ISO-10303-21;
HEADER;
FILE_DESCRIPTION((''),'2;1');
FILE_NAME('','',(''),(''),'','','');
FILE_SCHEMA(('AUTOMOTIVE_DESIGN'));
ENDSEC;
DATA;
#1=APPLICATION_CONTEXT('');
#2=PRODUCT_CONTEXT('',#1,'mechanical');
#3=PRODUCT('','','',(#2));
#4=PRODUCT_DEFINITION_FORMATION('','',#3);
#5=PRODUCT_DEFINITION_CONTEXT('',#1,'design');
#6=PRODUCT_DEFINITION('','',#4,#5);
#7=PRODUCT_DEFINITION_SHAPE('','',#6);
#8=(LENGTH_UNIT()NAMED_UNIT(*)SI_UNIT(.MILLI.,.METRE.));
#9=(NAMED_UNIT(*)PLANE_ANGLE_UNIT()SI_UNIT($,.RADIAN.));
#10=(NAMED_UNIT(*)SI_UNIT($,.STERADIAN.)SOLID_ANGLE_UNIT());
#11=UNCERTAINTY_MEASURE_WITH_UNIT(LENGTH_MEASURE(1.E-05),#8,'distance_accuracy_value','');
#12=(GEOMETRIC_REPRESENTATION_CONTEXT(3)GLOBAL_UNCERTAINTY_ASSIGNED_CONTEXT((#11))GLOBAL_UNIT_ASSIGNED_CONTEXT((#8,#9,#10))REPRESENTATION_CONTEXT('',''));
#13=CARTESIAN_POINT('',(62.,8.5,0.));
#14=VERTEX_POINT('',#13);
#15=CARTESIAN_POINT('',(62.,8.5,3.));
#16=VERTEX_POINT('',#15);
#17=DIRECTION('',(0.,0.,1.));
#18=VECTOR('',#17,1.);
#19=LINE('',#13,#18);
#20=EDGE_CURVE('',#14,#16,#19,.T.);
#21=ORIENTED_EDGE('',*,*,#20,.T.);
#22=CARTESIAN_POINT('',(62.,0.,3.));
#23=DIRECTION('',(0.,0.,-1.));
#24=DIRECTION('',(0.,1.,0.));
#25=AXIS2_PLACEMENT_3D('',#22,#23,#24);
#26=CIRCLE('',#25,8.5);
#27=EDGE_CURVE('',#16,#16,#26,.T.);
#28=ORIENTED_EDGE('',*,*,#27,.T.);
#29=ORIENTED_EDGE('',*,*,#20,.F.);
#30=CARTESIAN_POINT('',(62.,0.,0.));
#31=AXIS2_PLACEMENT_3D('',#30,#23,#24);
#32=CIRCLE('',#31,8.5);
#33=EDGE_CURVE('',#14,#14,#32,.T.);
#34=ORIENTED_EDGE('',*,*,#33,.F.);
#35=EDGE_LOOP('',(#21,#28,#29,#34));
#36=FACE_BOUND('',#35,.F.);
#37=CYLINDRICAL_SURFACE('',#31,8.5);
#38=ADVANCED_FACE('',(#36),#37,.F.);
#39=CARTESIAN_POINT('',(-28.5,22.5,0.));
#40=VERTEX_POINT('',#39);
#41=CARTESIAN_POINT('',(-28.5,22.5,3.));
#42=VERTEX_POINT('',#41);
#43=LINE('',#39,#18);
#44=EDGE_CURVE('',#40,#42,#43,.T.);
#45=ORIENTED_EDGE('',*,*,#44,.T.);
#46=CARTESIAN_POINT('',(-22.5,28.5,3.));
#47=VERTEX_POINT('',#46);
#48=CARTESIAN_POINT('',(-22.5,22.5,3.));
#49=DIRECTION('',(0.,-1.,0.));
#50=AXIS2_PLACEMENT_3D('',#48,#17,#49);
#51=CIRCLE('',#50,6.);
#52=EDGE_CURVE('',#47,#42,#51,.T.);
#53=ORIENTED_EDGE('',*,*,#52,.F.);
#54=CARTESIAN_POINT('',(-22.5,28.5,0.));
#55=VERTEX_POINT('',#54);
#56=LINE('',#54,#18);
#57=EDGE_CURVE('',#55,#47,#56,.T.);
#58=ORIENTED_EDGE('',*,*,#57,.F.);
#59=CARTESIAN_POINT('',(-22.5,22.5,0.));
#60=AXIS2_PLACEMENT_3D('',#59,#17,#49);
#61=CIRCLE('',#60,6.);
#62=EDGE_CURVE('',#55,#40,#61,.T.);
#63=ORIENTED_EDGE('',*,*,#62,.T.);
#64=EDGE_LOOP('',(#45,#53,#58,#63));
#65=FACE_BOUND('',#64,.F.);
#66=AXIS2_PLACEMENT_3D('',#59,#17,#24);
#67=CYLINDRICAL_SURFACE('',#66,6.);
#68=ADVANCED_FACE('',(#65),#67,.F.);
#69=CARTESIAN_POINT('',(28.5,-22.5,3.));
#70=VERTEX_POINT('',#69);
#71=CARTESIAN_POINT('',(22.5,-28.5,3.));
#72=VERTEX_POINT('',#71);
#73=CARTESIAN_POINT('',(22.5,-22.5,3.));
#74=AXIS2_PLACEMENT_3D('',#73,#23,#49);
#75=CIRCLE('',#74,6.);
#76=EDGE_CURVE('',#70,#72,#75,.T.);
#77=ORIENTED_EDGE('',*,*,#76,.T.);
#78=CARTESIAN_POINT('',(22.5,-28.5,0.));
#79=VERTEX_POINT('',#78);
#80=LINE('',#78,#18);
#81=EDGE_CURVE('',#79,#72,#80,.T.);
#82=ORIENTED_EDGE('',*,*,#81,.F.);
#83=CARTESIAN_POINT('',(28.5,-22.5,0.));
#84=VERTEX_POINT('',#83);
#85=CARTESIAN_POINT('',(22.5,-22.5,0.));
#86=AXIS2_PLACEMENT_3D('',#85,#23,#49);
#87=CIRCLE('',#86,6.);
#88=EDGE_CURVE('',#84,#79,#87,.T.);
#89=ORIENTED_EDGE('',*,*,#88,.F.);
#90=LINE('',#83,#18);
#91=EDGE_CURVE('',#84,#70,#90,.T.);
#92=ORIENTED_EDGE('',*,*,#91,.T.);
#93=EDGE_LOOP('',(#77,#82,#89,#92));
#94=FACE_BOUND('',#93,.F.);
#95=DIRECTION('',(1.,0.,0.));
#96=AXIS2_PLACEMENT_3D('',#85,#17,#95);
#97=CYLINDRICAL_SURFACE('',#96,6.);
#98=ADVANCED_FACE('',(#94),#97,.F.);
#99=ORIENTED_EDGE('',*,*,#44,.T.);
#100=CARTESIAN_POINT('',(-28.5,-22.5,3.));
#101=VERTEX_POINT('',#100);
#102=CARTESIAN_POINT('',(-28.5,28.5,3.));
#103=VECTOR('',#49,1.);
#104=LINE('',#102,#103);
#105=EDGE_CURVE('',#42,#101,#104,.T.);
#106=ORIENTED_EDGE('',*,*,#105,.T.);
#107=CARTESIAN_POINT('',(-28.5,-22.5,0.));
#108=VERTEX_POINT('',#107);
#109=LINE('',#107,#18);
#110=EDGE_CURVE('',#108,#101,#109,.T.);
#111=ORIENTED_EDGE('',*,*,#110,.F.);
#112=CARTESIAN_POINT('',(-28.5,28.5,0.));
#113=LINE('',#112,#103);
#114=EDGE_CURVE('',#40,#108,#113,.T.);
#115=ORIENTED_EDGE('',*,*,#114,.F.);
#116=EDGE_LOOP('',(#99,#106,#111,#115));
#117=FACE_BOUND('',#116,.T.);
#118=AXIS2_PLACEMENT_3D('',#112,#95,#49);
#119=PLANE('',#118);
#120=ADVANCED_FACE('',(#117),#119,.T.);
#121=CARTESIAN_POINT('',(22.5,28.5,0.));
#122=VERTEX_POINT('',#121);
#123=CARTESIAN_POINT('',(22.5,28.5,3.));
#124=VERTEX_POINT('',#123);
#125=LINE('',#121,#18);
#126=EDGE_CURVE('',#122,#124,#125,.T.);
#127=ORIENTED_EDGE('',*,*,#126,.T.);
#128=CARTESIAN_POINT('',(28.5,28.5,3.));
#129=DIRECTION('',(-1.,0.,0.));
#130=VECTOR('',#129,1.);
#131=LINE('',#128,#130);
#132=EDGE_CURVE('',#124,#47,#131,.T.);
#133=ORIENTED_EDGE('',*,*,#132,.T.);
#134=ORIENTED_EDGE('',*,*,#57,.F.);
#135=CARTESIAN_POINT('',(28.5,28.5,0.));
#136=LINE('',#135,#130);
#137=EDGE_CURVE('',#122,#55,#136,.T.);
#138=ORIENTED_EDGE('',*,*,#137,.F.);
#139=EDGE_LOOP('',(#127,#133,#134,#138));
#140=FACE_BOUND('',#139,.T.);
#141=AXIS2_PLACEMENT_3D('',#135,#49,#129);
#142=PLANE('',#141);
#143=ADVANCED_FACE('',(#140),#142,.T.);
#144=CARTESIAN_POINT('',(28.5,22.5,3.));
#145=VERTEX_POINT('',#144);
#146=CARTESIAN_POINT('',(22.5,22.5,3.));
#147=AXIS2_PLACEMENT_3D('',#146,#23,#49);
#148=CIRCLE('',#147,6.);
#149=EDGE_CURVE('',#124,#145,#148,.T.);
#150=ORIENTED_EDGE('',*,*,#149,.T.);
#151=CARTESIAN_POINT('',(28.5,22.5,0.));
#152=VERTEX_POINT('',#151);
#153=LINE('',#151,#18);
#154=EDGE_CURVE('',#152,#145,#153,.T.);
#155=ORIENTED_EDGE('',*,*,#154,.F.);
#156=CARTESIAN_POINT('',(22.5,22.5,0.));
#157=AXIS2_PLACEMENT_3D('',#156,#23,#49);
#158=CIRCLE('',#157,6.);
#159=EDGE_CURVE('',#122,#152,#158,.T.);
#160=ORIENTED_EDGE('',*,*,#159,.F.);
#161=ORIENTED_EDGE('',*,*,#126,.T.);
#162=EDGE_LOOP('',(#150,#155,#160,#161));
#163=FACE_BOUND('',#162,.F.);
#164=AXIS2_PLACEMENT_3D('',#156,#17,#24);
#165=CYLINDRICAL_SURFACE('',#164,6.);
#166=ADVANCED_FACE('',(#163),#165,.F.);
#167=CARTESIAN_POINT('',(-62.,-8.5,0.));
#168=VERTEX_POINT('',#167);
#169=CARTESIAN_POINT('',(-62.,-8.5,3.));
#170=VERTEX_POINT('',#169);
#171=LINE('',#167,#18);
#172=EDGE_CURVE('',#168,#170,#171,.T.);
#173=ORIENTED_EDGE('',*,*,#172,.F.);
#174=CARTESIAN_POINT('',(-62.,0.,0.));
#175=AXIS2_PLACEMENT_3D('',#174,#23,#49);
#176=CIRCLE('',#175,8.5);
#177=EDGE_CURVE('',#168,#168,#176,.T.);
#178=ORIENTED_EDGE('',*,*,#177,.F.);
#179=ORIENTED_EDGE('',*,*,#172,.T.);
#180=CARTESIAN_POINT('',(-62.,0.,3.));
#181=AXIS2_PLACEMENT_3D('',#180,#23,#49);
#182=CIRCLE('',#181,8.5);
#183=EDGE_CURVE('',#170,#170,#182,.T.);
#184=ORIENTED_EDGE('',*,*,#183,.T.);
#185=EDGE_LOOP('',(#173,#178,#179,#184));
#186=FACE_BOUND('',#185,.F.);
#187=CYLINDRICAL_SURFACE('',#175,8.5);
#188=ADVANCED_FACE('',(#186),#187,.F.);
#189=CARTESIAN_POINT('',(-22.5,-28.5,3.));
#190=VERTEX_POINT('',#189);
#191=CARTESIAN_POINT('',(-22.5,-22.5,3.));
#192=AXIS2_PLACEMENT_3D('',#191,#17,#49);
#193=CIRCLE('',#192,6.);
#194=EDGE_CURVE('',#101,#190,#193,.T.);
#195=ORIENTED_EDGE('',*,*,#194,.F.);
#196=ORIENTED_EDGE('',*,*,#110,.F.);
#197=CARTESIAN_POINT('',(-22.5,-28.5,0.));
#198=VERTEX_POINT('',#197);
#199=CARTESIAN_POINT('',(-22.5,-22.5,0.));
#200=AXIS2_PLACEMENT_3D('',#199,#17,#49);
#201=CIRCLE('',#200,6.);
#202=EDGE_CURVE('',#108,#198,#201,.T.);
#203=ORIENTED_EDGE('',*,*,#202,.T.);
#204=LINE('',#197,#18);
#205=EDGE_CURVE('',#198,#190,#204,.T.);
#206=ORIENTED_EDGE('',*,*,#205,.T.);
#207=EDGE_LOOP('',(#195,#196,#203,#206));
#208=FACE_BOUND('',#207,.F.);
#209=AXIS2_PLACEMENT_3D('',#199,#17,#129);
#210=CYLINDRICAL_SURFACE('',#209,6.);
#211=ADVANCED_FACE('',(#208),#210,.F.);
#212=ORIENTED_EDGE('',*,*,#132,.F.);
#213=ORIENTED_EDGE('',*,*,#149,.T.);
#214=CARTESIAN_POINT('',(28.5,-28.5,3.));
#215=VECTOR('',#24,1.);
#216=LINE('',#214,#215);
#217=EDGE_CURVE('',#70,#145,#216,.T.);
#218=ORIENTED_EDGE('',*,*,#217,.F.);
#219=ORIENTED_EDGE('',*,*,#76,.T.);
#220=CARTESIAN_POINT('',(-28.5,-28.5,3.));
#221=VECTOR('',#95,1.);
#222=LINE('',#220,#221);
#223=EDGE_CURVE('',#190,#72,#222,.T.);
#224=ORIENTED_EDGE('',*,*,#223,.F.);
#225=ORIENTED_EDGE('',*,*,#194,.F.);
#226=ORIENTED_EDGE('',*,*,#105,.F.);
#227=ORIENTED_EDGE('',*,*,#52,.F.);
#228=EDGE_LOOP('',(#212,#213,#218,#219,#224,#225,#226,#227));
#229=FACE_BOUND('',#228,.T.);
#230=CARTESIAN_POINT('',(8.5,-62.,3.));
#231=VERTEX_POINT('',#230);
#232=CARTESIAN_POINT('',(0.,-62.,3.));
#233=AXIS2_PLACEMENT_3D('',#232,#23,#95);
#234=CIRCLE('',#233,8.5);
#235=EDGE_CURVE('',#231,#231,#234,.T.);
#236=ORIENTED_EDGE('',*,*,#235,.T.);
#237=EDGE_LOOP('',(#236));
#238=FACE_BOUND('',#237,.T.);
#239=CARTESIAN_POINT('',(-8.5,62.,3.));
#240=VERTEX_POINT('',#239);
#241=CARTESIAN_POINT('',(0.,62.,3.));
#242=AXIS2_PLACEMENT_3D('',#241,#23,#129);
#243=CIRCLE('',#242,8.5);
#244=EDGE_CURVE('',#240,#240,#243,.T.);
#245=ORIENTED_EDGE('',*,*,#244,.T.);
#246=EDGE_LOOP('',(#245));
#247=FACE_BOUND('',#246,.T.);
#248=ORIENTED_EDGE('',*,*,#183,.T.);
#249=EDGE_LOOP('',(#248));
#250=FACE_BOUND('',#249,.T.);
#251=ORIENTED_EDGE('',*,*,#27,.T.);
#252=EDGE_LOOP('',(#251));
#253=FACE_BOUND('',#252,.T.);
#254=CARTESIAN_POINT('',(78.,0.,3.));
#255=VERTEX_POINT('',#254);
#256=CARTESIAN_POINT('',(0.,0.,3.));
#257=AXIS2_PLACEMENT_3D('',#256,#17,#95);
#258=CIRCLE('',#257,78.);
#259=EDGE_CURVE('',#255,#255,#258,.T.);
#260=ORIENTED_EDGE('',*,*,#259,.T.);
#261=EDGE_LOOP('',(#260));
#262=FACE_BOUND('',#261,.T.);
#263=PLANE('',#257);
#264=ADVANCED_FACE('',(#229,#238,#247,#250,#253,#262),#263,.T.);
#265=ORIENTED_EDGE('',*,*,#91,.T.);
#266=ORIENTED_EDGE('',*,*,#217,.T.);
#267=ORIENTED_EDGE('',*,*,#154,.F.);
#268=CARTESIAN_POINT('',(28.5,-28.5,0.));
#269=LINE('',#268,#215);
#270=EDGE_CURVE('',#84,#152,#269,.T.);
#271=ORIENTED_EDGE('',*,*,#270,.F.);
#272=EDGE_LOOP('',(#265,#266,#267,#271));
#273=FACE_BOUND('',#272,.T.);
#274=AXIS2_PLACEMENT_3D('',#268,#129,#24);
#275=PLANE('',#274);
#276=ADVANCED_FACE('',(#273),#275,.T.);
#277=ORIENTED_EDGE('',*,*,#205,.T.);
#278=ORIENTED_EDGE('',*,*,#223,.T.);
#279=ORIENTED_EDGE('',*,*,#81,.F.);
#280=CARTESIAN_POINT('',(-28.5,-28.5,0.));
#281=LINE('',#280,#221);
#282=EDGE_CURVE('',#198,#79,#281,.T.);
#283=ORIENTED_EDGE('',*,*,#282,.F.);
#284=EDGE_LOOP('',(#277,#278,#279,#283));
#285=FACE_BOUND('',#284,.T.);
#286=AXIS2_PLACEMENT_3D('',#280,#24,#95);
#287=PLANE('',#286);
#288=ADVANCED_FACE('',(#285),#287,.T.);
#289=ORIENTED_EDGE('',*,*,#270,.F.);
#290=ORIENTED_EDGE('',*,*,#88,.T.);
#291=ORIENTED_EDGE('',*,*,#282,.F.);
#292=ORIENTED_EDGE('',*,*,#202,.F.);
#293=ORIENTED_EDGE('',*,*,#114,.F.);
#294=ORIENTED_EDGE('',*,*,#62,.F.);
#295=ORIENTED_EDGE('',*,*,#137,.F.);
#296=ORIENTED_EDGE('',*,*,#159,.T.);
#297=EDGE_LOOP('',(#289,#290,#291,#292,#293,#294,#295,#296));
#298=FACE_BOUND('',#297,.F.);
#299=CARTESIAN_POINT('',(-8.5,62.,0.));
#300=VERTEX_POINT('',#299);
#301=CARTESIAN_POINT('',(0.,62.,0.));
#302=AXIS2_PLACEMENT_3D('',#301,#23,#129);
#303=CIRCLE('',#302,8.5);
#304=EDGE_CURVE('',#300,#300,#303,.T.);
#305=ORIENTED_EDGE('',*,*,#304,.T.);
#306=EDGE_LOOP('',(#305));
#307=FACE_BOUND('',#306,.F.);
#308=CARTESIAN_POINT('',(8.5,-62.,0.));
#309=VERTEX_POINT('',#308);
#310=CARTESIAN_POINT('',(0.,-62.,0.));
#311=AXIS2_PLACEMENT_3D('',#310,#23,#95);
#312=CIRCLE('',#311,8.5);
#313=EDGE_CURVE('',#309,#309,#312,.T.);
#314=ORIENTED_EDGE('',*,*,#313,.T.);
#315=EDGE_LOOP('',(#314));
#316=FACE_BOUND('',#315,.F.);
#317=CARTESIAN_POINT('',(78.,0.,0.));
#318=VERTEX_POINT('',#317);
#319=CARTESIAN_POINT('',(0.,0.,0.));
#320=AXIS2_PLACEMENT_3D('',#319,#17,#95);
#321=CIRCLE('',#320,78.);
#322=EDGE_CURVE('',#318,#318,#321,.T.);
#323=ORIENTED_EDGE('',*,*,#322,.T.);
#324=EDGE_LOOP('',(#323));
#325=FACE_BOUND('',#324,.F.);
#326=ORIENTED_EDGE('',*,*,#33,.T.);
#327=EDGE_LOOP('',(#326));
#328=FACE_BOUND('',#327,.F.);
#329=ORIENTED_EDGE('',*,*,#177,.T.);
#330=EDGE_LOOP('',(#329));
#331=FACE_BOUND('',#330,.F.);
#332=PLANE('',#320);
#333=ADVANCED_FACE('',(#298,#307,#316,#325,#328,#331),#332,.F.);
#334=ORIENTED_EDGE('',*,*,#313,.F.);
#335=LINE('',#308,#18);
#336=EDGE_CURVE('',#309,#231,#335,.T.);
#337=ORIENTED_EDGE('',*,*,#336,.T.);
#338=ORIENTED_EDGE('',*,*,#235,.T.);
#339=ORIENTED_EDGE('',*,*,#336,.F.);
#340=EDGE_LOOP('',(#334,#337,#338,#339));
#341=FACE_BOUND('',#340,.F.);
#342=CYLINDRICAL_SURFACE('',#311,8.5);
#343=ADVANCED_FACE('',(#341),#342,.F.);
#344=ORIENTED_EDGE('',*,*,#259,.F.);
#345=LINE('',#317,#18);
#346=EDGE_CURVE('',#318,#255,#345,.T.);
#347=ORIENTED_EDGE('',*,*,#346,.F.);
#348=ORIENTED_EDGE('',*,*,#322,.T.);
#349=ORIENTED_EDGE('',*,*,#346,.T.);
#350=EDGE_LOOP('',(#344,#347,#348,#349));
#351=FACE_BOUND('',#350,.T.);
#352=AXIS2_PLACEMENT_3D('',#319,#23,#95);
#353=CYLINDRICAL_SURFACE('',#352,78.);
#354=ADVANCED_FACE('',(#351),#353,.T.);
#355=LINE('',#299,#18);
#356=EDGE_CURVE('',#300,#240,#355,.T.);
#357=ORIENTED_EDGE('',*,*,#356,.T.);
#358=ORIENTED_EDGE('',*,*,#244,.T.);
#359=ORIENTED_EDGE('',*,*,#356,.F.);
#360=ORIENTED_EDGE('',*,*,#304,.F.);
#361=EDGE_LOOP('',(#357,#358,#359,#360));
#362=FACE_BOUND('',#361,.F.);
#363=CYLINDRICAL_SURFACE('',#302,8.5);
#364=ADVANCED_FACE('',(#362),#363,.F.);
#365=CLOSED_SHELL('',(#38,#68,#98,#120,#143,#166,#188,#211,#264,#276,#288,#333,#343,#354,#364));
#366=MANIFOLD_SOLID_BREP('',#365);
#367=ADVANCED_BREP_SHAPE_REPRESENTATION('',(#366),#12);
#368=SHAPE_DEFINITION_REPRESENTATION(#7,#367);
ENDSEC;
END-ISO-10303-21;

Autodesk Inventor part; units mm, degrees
ref_plane "YZ Plane" through (0, 0, 0) normal (1, 0, 0) x (0, 1, 0)
ref_plane "XZ Plane" through (0, 0, 0) normal (0, 1, 0) x (-1, 0, 0)
ref_plane "XY Plane" through (0, 0, 0) normal (0, 0, 1) x (1, 0, 0)
sketch "Sketch1" plane through (0, 0, 0) normal (0, 0, 1) x (1, 0, 0)
  circle A0 centre (0, 0) radius 78
  line L0 (28.5, 28.5) -> (-28.5, 28.5)
  line L1 (-28.5, 28.5) -> (-28.5, -28.5)
  line L2 (-28.5, -28.5) -> (28.5, -28.5)
  line L3 (28.5, -28.5) -> (28.5, 28.5)
  line L4 (28.5, 28.5) -> (-28.5, -28.5) construction
  line L5 (-28.5, 28.5) -> (28.5, -28.5) construction
  dimension "d157" = 156
  dimension "d158" = 57
  dimension "d159" = 57
extrude "Plate5" add sketch "Sketch1" along normal blind 3
sketch "Sketch7" plane through (0, 0, 0) normal (0, 0, -1) x (-1, 0, 0)
  circle A0 centre (0, 62) radius 8.5
  point P0 (0, 0)
  dimension "d160" = 17
  dimension "d161" = 62
extrude "Cut1" cut sketch "Sketch7" against normal blind 3
pattern_circular "Circular Pattern1" count 4 over 360 about axis through (0, 0, -10) along (0, 0, 1) of "Cut1"
fillet "Corner Round1" radius 6 4 edges at (-28.5, -28.5, 1.5) (28.5, -28.5, 1.5) (28.5, 28.5, 1.5) (-28.5, 28.5, 1.5)
properties part number "TZS 1757 FDS 940x50 FLANGE" material "Stainless Steel"
